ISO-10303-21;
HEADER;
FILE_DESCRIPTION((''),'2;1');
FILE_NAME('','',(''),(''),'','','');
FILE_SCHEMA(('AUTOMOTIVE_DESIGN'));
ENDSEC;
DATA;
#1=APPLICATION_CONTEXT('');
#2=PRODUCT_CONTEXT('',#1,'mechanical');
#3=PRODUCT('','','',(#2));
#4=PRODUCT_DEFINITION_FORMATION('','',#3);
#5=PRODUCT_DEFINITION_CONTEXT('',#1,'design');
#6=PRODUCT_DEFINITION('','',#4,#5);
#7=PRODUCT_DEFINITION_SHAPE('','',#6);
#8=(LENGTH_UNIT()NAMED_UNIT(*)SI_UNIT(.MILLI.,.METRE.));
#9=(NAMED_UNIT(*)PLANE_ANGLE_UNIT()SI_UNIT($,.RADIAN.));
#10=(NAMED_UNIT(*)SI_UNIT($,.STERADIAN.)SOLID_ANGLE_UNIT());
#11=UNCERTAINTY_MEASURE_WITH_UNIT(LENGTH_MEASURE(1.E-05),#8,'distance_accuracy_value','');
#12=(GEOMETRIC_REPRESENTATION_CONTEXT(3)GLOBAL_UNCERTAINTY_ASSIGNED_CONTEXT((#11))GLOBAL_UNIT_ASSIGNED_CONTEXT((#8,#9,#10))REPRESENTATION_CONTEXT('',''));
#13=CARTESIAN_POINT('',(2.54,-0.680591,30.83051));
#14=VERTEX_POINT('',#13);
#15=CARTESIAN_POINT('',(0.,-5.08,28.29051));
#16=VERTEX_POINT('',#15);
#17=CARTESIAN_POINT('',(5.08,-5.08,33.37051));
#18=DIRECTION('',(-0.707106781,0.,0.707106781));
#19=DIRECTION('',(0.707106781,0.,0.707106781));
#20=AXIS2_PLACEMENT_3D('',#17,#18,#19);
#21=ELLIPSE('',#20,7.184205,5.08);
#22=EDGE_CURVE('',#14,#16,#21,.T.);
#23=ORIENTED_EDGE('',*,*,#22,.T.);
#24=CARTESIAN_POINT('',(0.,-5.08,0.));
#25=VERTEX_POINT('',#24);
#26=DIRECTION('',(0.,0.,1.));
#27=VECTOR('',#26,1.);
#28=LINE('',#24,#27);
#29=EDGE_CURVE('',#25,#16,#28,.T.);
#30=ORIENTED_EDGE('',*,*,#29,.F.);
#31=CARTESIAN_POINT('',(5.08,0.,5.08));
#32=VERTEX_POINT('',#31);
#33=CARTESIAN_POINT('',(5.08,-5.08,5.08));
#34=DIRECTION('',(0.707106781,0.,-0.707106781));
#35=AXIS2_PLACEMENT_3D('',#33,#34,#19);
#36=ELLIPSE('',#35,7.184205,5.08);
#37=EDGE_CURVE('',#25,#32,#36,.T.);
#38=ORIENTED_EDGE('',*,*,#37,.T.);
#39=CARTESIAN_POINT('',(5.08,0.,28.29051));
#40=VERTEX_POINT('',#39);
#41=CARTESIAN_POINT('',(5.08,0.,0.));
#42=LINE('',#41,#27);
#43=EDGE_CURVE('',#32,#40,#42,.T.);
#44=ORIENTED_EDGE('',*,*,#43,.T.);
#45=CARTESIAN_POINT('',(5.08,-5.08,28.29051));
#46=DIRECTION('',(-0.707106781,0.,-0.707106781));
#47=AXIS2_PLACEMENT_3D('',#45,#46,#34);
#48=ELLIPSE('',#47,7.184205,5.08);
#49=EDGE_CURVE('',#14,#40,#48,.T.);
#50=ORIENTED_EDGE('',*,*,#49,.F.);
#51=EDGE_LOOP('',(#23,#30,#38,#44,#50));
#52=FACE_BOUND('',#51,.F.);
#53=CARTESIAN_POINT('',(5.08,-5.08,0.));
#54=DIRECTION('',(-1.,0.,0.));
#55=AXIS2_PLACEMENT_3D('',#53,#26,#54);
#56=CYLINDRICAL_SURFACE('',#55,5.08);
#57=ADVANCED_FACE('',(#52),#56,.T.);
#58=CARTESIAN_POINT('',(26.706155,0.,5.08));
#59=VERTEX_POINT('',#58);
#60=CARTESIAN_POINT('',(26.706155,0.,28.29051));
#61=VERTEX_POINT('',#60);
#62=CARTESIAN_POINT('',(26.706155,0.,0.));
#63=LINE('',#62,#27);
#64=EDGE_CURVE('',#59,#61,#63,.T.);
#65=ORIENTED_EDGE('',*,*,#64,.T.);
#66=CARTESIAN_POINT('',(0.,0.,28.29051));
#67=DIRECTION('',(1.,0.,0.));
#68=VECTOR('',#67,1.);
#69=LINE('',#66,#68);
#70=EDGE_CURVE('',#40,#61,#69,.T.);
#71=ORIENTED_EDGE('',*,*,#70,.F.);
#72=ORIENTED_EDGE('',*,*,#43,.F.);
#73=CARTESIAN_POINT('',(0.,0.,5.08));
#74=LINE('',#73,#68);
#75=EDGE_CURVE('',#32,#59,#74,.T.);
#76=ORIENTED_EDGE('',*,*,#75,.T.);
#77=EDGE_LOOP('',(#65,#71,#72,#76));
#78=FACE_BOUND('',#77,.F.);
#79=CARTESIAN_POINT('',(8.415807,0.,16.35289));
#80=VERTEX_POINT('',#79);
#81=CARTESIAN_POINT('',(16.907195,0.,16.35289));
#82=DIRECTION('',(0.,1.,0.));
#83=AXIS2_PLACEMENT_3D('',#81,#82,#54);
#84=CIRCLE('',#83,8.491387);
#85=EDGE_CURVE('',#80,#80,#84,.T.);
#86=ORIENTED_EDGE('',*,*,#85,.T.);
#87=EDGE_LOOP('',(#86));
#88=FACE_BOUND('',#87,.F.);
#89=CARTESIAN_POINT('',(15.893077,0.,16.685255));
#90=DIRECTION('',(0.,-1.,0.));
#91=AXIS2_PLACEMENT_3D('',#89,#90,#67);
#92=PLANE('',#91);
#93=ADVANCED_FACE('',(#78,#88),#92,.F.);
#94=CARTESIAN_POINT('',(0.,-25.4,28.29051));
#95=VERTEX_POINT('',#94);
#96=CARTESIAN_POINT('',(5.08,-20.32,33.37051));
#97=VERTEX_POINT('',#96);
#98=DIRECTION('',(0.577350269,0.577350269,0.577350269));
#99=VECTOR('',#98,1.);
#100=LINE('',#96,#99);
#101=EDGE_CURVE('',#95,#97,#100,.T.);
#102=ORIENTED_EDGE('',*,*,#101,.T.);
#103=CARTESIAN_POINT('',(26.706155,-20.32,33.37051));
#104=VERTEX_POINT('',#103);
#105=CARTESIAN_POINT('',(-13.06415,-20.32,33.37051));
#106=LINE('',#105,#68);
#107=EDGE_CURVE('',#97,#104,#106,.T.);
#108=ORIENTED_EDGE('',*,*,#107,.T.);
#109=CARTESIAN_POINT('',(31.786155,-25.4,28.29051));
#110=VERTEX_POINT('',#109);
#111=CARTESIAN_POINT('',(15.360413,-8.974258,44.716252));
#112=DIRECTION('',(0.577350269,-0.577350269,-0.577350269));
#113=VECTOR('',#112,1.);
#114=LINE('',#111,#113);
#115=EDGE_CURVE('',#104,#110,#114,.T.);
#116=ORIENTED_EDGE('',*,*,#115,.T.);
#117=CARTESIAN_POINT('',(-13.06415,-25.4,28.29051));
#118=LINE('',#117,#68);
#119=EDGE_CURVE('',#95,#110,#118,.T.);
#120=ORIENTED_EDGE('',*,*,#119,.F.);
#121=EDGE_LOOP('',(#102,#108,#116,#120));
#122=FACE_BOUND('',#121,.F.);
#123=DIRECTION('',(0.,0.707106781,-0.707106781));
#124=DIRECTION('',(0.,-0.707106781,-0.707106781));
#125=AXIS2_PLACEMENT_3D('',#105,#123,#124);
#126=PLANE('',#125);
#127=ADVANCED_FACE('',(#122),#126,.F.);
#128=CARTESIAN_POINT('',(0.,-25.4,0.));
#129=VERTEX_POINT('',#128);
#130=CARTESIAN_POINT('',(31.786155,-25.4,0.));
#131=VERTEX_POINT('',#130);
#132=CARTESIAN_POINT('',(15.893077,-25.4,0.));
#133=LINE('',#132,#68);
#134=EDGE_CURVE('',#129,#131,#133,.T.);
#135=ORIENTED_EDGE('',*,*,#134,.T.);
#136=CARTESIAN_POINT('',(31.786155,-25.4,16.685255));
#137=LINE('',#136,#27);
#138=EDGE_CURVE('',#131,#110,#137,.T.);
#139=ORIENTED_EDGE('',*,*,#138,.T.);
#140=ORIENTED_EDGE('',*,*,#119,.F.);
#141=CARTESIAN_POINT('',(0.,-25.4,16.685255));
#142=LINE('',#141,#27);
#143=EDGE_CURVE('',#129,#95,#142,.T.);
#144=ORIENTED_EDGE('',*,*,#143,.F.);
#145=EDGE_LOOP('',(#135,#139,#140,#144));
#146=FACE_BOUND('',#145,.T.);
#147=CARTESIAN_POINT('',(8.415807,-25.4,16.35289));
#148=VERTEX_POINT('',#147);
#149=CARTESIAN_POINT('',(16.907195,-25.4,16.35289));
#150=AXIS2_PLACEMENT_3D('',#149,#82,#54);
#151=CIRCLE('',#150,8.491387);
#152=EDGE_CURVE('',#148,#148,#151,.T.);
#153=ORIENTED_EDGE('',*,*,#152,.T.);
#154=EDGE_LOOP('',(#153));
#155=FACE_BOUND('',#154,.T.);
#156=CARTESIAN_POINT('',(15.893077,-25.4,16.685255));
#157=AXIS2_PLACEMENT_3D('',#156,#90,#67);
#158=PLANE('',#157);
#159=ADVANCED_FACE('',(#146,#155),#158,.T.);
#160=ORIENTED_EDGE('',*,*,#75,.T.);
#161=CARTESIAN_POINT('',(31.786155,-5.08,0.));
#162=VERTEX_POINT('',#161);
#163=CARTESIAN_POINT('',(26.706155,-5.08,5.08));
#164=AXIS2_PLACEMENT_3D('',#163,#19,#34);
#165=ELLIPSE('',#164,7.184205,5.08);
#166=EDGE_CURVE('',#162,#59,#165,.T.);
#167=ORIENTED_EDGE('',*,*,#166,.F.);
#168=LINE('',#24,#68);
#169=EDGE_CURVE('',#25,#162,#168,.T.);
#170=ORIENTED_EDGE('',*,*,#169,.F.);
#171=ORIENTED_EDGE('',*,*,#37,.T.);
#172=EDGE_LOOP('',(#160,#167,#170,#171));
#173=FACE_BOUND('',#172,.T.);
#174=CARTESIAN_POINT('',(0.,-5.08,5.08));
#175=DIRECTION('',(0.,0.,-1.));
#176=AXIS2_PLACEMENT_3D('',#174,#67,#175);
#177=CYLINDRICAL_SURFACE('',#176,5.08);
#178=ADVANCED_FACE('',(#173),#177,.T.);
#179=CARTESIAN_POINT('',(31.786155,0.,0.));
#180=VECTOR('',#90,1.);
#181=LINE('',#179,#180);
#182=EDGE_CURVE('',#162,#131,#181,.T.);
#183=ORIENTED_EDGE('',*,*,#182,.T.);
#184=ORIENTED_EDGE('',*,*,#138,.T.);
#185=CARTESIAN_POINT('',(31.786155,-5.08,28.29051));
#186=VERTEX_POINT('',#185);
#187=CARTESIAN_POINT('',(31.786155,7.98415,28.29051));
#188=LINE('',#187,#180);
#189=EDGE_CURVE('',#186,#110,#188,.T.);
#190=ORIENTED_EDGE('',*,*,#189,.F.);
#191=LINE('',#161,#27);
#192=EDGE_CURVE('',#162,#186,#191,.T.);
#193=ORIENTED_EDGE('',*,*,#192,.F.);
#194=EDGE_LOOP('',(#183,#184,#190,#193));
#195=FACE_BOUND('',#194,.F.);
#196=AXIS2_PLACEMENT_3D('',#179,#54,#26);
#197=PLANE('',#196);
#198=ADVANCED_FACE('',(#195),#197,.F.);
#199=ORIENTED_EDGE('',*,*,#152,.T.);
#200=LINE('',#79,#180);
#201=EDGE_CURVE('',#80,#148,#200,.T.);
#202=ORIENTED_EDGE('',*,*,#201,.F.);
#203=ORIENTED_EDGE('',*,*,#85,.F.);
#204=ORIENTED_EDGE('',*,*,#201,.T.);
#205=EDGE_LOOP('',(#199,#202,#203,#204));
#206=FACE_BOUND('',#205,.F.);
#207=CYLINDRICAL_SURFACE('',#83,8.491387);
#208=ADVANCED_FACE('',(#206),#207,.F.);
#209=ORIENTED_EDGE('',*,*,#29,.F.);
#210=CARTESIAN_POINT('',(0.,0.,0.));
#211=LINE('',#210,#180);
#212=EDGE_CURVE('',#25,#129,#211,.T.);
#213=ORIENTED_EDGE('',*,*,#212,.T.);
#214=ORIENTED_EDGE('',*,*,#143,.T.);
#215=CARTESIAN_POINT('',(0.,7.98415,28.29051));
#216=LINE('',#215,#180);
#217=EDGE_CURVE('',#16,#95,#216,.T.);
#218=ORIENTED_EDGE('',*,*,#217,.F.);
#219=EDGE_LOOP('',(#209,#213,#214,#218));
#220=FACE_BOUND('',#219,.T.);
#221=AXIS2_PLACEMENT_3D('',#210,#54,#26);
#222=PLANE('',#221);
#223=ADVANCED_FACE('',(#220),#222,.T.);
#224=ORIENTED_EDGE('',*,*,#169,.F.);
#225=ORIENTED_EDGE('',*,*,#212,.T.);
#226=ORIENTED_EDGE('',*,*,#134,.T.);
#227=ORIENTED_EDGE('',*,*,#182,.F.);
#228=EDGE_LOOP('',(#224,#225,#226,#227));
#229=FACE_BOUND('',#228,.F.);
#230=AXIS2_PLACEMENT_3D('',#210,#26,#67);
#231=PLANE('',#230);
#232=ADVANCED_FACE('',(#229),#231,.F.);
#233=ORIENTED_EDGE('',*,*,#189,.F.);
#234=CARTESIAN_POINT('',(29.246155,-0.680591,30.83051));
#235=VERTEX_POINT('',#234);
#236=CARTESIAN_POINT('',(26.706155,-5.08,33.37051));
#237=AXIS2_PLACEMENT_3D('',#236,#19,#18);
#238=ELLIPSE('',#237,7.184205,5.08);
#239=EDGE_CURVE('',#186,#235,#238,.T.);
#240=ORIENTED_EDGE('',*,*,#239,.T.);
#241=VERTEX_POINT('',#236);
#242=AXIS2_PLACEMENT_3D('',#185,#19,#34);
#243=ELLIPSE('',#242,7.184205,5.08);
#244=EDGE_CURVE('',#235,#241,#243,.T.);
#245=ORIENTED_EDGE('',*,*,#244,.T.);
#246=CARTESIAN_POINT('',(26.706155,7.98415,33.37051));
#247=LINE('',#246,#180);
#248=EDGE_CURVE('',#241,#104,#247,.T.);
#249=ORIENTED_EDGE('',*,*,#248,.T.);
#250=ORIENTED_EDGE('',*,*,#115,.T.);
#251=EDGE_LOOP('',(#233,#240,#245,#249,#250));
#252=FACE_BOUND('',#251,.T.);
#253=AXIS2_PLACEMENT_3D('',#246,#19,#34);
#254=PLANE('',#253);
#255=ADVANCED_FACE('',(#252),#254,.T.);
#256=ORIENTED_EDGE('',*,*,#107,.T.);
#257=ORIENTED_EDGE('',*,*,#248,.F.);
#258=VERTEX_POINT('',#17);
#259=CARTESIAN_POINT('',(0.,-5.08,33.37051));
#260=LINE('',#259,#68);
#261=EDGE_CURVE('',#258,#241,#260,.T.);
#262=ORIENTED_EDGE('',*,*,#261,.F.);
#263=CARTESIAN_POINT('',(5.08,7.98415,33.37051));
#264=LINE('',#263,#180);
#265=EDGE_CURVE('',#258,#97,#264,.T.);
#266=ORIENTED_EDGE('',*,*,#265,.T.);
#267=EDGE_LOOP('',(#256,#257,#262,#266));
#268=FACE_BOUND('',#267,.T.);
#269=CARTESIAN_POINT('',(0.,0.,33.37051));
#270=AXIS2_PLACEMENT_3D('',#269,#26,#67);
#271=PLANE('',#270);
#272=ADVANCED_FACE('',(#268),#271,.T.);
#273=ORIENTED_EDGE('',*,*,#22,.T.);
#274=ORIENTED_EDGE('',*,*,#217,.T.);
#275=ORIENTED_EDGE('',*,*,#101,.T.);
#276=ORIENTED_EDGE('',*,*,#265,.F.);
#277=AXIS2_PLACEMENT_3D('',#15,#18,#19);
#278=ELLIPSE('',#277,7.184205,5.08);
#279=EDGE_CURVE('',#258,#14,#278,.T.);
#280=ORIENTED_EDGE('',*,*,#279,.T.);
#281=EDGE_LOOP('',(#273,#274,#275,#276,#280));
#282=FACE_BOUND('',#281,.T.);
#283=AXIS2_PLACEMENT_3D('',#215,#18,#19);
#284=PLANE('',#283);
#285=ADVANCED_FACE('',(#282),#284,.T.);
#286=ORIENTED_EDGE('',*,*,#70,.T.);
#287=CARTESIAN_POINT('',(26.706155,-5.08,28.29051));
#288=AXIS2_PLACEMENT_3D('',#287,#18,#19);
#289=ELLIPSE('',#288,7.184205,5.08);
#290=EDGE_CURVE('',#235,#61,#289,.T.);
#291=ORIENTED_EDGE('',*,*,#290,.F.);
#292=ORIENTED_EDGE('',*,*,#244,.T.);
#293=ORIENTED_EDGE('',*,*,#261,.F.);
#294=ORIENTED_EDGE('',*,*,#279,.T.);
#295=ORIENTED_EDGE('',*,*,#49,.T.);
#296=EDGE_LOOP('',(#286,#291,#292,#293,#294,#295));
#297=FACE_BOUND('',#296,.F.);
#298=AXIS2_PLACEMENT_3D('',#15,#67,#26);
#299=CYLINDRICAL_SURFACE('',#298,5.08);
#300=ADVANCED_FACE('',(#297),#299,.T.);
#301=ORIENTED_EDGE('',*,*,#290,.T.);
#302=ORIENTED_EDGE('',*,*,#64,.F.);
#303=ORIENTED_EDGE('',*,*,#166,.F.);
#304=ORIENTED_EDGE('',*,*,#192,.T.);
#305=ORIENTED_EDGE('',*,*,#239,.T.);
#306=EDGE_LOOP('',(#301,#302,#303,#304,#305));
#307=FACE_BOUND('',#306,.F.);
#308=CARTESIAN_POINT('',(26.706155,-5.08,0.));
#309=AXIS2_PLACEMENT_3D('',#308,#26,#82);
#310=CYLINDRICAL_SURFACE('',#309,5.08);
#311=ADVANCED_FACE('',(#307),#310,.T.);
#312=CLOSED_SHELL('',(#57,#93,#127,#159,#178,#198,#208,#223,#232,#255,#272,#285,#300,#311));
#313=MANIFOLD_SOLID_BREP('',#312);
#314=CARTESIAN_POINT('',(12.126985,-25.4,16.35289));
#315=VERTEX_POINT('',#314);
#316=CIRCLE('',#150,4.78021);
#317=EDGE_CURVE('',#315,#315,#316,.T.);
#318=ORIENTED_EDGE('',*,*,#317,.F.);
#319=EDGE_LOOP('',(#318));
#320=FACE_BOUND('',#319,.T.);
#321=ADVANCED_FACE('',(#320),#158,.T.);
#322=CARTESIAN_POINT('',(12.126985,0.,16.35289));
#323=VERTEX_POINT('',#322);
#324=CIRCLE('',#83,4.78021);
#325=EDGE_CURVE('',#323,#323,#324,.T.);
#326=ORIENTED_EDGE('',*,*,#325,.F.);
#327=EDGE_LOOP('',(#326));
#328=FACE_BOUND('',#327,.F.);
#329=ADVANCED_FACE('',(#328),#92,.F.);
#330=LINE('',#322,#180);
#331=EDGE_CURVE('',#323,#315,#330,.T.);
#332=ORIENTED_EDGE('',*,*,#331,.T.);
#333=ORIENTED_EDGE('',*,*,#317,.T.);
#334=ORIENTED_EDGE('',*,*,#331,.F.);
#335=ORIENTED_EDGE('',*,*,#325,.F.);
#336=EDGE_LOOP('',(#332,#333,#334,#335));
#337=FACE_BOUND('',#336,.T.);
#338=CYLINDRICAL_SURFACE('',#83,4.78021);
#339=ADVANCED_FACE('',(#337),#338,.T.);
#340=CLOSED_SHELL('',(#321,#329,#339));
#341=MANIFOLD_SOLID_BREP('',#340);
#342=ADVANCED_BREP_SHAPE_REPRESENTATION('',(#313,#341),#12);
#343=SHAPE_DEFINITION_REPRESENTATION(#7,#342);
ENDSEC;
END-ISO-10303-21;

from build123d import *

# Parameters (mm, degrees)
F0_W        = 31.7861549556
F0_H        = 33.3705097437
F1_DEPTH    = 25.4
F2_R        = 8.4913873206
F2_R_2      = 4.7802100494
F3_DEPTH    = 25.401
F4_R        = 5.08
F5_T1_DEPTH = 57.9144541134
F5_T3_DEPTH = 46.4482991577


# Not quite as in the source:
# - a fillet or chamfer that OpenCascade refuses, or shapes differently, is made with other operations: its cross-section is extruded or revolved along the edge and cut away or added


with BuildPart() as f1:
    # F0 (on Front) → F1 (new body)
    with BuildSketch(Plane.XZ):
        with Locations((15.8930774778, 16.6852548718)):
            Rectangle(F0_W, F0_H)
    extrude(amount=F1_DEPTH)

    # F2 (on face) → F3 (cut, through all)
    with BuildSketch(Plane(origin=(0, 0, 0), x_dir=(-1, 0, 0), z_dir=(0, 1, 0))):
        with Locations((-16.9071946293, 16.3528900594)):
            Circle(F2_R)
        with Locations((-16.9071946293, 16.3528900594)):
            Circle(F2_R_2, mode=Mode.SUBTRACT)
    extrude(amount=-F3_DEPTH, mode=Mode.SUBTRACT)

    # F4
    f4_edges = [f1.edges().sort_by_distance(p)[0] for p in [
        (15.893077, 0, 33.37051),
        (0, 0, 16.685255),
        (15.893077, 0, 0),
        (31.786155, 0, 16.685255),
    ]]
    fillet(f4_edges, radius=F4_R)

    # F5: chamfer of 5.08 on 4 edges, made by hand

    # F5_s2 → F5_t1 (cut)
    with BuildSketch(Plane.YZ.offset(-13.0641495789)):
        Polygon((-20.32, 33.3705097437), (-25.4, 28.2905097437), (-25.4, 33.3705097437), align=None)
    extrude(amount=F5_T1_DEPTH, mode=Mode.SUBTRACT)

    # F5_s4 → F5_t3 (cut)
    with BuildSketch(Plane.XZ.offset(-7.9841495789)):
        Polygon((26.7061549556, 33.3705097437), (31.7861549556, 28.2905097437), (31.7861549556, 33.3705097437), align=None)
        Polygon((0, 28.2905097437), (5.08, 33.3705097437), (0, 33.3705097437), align=None)
    extrude(amount=F5_T3_DEPTH, mode=Mode.SUBTRACT)


solid = f1.part
